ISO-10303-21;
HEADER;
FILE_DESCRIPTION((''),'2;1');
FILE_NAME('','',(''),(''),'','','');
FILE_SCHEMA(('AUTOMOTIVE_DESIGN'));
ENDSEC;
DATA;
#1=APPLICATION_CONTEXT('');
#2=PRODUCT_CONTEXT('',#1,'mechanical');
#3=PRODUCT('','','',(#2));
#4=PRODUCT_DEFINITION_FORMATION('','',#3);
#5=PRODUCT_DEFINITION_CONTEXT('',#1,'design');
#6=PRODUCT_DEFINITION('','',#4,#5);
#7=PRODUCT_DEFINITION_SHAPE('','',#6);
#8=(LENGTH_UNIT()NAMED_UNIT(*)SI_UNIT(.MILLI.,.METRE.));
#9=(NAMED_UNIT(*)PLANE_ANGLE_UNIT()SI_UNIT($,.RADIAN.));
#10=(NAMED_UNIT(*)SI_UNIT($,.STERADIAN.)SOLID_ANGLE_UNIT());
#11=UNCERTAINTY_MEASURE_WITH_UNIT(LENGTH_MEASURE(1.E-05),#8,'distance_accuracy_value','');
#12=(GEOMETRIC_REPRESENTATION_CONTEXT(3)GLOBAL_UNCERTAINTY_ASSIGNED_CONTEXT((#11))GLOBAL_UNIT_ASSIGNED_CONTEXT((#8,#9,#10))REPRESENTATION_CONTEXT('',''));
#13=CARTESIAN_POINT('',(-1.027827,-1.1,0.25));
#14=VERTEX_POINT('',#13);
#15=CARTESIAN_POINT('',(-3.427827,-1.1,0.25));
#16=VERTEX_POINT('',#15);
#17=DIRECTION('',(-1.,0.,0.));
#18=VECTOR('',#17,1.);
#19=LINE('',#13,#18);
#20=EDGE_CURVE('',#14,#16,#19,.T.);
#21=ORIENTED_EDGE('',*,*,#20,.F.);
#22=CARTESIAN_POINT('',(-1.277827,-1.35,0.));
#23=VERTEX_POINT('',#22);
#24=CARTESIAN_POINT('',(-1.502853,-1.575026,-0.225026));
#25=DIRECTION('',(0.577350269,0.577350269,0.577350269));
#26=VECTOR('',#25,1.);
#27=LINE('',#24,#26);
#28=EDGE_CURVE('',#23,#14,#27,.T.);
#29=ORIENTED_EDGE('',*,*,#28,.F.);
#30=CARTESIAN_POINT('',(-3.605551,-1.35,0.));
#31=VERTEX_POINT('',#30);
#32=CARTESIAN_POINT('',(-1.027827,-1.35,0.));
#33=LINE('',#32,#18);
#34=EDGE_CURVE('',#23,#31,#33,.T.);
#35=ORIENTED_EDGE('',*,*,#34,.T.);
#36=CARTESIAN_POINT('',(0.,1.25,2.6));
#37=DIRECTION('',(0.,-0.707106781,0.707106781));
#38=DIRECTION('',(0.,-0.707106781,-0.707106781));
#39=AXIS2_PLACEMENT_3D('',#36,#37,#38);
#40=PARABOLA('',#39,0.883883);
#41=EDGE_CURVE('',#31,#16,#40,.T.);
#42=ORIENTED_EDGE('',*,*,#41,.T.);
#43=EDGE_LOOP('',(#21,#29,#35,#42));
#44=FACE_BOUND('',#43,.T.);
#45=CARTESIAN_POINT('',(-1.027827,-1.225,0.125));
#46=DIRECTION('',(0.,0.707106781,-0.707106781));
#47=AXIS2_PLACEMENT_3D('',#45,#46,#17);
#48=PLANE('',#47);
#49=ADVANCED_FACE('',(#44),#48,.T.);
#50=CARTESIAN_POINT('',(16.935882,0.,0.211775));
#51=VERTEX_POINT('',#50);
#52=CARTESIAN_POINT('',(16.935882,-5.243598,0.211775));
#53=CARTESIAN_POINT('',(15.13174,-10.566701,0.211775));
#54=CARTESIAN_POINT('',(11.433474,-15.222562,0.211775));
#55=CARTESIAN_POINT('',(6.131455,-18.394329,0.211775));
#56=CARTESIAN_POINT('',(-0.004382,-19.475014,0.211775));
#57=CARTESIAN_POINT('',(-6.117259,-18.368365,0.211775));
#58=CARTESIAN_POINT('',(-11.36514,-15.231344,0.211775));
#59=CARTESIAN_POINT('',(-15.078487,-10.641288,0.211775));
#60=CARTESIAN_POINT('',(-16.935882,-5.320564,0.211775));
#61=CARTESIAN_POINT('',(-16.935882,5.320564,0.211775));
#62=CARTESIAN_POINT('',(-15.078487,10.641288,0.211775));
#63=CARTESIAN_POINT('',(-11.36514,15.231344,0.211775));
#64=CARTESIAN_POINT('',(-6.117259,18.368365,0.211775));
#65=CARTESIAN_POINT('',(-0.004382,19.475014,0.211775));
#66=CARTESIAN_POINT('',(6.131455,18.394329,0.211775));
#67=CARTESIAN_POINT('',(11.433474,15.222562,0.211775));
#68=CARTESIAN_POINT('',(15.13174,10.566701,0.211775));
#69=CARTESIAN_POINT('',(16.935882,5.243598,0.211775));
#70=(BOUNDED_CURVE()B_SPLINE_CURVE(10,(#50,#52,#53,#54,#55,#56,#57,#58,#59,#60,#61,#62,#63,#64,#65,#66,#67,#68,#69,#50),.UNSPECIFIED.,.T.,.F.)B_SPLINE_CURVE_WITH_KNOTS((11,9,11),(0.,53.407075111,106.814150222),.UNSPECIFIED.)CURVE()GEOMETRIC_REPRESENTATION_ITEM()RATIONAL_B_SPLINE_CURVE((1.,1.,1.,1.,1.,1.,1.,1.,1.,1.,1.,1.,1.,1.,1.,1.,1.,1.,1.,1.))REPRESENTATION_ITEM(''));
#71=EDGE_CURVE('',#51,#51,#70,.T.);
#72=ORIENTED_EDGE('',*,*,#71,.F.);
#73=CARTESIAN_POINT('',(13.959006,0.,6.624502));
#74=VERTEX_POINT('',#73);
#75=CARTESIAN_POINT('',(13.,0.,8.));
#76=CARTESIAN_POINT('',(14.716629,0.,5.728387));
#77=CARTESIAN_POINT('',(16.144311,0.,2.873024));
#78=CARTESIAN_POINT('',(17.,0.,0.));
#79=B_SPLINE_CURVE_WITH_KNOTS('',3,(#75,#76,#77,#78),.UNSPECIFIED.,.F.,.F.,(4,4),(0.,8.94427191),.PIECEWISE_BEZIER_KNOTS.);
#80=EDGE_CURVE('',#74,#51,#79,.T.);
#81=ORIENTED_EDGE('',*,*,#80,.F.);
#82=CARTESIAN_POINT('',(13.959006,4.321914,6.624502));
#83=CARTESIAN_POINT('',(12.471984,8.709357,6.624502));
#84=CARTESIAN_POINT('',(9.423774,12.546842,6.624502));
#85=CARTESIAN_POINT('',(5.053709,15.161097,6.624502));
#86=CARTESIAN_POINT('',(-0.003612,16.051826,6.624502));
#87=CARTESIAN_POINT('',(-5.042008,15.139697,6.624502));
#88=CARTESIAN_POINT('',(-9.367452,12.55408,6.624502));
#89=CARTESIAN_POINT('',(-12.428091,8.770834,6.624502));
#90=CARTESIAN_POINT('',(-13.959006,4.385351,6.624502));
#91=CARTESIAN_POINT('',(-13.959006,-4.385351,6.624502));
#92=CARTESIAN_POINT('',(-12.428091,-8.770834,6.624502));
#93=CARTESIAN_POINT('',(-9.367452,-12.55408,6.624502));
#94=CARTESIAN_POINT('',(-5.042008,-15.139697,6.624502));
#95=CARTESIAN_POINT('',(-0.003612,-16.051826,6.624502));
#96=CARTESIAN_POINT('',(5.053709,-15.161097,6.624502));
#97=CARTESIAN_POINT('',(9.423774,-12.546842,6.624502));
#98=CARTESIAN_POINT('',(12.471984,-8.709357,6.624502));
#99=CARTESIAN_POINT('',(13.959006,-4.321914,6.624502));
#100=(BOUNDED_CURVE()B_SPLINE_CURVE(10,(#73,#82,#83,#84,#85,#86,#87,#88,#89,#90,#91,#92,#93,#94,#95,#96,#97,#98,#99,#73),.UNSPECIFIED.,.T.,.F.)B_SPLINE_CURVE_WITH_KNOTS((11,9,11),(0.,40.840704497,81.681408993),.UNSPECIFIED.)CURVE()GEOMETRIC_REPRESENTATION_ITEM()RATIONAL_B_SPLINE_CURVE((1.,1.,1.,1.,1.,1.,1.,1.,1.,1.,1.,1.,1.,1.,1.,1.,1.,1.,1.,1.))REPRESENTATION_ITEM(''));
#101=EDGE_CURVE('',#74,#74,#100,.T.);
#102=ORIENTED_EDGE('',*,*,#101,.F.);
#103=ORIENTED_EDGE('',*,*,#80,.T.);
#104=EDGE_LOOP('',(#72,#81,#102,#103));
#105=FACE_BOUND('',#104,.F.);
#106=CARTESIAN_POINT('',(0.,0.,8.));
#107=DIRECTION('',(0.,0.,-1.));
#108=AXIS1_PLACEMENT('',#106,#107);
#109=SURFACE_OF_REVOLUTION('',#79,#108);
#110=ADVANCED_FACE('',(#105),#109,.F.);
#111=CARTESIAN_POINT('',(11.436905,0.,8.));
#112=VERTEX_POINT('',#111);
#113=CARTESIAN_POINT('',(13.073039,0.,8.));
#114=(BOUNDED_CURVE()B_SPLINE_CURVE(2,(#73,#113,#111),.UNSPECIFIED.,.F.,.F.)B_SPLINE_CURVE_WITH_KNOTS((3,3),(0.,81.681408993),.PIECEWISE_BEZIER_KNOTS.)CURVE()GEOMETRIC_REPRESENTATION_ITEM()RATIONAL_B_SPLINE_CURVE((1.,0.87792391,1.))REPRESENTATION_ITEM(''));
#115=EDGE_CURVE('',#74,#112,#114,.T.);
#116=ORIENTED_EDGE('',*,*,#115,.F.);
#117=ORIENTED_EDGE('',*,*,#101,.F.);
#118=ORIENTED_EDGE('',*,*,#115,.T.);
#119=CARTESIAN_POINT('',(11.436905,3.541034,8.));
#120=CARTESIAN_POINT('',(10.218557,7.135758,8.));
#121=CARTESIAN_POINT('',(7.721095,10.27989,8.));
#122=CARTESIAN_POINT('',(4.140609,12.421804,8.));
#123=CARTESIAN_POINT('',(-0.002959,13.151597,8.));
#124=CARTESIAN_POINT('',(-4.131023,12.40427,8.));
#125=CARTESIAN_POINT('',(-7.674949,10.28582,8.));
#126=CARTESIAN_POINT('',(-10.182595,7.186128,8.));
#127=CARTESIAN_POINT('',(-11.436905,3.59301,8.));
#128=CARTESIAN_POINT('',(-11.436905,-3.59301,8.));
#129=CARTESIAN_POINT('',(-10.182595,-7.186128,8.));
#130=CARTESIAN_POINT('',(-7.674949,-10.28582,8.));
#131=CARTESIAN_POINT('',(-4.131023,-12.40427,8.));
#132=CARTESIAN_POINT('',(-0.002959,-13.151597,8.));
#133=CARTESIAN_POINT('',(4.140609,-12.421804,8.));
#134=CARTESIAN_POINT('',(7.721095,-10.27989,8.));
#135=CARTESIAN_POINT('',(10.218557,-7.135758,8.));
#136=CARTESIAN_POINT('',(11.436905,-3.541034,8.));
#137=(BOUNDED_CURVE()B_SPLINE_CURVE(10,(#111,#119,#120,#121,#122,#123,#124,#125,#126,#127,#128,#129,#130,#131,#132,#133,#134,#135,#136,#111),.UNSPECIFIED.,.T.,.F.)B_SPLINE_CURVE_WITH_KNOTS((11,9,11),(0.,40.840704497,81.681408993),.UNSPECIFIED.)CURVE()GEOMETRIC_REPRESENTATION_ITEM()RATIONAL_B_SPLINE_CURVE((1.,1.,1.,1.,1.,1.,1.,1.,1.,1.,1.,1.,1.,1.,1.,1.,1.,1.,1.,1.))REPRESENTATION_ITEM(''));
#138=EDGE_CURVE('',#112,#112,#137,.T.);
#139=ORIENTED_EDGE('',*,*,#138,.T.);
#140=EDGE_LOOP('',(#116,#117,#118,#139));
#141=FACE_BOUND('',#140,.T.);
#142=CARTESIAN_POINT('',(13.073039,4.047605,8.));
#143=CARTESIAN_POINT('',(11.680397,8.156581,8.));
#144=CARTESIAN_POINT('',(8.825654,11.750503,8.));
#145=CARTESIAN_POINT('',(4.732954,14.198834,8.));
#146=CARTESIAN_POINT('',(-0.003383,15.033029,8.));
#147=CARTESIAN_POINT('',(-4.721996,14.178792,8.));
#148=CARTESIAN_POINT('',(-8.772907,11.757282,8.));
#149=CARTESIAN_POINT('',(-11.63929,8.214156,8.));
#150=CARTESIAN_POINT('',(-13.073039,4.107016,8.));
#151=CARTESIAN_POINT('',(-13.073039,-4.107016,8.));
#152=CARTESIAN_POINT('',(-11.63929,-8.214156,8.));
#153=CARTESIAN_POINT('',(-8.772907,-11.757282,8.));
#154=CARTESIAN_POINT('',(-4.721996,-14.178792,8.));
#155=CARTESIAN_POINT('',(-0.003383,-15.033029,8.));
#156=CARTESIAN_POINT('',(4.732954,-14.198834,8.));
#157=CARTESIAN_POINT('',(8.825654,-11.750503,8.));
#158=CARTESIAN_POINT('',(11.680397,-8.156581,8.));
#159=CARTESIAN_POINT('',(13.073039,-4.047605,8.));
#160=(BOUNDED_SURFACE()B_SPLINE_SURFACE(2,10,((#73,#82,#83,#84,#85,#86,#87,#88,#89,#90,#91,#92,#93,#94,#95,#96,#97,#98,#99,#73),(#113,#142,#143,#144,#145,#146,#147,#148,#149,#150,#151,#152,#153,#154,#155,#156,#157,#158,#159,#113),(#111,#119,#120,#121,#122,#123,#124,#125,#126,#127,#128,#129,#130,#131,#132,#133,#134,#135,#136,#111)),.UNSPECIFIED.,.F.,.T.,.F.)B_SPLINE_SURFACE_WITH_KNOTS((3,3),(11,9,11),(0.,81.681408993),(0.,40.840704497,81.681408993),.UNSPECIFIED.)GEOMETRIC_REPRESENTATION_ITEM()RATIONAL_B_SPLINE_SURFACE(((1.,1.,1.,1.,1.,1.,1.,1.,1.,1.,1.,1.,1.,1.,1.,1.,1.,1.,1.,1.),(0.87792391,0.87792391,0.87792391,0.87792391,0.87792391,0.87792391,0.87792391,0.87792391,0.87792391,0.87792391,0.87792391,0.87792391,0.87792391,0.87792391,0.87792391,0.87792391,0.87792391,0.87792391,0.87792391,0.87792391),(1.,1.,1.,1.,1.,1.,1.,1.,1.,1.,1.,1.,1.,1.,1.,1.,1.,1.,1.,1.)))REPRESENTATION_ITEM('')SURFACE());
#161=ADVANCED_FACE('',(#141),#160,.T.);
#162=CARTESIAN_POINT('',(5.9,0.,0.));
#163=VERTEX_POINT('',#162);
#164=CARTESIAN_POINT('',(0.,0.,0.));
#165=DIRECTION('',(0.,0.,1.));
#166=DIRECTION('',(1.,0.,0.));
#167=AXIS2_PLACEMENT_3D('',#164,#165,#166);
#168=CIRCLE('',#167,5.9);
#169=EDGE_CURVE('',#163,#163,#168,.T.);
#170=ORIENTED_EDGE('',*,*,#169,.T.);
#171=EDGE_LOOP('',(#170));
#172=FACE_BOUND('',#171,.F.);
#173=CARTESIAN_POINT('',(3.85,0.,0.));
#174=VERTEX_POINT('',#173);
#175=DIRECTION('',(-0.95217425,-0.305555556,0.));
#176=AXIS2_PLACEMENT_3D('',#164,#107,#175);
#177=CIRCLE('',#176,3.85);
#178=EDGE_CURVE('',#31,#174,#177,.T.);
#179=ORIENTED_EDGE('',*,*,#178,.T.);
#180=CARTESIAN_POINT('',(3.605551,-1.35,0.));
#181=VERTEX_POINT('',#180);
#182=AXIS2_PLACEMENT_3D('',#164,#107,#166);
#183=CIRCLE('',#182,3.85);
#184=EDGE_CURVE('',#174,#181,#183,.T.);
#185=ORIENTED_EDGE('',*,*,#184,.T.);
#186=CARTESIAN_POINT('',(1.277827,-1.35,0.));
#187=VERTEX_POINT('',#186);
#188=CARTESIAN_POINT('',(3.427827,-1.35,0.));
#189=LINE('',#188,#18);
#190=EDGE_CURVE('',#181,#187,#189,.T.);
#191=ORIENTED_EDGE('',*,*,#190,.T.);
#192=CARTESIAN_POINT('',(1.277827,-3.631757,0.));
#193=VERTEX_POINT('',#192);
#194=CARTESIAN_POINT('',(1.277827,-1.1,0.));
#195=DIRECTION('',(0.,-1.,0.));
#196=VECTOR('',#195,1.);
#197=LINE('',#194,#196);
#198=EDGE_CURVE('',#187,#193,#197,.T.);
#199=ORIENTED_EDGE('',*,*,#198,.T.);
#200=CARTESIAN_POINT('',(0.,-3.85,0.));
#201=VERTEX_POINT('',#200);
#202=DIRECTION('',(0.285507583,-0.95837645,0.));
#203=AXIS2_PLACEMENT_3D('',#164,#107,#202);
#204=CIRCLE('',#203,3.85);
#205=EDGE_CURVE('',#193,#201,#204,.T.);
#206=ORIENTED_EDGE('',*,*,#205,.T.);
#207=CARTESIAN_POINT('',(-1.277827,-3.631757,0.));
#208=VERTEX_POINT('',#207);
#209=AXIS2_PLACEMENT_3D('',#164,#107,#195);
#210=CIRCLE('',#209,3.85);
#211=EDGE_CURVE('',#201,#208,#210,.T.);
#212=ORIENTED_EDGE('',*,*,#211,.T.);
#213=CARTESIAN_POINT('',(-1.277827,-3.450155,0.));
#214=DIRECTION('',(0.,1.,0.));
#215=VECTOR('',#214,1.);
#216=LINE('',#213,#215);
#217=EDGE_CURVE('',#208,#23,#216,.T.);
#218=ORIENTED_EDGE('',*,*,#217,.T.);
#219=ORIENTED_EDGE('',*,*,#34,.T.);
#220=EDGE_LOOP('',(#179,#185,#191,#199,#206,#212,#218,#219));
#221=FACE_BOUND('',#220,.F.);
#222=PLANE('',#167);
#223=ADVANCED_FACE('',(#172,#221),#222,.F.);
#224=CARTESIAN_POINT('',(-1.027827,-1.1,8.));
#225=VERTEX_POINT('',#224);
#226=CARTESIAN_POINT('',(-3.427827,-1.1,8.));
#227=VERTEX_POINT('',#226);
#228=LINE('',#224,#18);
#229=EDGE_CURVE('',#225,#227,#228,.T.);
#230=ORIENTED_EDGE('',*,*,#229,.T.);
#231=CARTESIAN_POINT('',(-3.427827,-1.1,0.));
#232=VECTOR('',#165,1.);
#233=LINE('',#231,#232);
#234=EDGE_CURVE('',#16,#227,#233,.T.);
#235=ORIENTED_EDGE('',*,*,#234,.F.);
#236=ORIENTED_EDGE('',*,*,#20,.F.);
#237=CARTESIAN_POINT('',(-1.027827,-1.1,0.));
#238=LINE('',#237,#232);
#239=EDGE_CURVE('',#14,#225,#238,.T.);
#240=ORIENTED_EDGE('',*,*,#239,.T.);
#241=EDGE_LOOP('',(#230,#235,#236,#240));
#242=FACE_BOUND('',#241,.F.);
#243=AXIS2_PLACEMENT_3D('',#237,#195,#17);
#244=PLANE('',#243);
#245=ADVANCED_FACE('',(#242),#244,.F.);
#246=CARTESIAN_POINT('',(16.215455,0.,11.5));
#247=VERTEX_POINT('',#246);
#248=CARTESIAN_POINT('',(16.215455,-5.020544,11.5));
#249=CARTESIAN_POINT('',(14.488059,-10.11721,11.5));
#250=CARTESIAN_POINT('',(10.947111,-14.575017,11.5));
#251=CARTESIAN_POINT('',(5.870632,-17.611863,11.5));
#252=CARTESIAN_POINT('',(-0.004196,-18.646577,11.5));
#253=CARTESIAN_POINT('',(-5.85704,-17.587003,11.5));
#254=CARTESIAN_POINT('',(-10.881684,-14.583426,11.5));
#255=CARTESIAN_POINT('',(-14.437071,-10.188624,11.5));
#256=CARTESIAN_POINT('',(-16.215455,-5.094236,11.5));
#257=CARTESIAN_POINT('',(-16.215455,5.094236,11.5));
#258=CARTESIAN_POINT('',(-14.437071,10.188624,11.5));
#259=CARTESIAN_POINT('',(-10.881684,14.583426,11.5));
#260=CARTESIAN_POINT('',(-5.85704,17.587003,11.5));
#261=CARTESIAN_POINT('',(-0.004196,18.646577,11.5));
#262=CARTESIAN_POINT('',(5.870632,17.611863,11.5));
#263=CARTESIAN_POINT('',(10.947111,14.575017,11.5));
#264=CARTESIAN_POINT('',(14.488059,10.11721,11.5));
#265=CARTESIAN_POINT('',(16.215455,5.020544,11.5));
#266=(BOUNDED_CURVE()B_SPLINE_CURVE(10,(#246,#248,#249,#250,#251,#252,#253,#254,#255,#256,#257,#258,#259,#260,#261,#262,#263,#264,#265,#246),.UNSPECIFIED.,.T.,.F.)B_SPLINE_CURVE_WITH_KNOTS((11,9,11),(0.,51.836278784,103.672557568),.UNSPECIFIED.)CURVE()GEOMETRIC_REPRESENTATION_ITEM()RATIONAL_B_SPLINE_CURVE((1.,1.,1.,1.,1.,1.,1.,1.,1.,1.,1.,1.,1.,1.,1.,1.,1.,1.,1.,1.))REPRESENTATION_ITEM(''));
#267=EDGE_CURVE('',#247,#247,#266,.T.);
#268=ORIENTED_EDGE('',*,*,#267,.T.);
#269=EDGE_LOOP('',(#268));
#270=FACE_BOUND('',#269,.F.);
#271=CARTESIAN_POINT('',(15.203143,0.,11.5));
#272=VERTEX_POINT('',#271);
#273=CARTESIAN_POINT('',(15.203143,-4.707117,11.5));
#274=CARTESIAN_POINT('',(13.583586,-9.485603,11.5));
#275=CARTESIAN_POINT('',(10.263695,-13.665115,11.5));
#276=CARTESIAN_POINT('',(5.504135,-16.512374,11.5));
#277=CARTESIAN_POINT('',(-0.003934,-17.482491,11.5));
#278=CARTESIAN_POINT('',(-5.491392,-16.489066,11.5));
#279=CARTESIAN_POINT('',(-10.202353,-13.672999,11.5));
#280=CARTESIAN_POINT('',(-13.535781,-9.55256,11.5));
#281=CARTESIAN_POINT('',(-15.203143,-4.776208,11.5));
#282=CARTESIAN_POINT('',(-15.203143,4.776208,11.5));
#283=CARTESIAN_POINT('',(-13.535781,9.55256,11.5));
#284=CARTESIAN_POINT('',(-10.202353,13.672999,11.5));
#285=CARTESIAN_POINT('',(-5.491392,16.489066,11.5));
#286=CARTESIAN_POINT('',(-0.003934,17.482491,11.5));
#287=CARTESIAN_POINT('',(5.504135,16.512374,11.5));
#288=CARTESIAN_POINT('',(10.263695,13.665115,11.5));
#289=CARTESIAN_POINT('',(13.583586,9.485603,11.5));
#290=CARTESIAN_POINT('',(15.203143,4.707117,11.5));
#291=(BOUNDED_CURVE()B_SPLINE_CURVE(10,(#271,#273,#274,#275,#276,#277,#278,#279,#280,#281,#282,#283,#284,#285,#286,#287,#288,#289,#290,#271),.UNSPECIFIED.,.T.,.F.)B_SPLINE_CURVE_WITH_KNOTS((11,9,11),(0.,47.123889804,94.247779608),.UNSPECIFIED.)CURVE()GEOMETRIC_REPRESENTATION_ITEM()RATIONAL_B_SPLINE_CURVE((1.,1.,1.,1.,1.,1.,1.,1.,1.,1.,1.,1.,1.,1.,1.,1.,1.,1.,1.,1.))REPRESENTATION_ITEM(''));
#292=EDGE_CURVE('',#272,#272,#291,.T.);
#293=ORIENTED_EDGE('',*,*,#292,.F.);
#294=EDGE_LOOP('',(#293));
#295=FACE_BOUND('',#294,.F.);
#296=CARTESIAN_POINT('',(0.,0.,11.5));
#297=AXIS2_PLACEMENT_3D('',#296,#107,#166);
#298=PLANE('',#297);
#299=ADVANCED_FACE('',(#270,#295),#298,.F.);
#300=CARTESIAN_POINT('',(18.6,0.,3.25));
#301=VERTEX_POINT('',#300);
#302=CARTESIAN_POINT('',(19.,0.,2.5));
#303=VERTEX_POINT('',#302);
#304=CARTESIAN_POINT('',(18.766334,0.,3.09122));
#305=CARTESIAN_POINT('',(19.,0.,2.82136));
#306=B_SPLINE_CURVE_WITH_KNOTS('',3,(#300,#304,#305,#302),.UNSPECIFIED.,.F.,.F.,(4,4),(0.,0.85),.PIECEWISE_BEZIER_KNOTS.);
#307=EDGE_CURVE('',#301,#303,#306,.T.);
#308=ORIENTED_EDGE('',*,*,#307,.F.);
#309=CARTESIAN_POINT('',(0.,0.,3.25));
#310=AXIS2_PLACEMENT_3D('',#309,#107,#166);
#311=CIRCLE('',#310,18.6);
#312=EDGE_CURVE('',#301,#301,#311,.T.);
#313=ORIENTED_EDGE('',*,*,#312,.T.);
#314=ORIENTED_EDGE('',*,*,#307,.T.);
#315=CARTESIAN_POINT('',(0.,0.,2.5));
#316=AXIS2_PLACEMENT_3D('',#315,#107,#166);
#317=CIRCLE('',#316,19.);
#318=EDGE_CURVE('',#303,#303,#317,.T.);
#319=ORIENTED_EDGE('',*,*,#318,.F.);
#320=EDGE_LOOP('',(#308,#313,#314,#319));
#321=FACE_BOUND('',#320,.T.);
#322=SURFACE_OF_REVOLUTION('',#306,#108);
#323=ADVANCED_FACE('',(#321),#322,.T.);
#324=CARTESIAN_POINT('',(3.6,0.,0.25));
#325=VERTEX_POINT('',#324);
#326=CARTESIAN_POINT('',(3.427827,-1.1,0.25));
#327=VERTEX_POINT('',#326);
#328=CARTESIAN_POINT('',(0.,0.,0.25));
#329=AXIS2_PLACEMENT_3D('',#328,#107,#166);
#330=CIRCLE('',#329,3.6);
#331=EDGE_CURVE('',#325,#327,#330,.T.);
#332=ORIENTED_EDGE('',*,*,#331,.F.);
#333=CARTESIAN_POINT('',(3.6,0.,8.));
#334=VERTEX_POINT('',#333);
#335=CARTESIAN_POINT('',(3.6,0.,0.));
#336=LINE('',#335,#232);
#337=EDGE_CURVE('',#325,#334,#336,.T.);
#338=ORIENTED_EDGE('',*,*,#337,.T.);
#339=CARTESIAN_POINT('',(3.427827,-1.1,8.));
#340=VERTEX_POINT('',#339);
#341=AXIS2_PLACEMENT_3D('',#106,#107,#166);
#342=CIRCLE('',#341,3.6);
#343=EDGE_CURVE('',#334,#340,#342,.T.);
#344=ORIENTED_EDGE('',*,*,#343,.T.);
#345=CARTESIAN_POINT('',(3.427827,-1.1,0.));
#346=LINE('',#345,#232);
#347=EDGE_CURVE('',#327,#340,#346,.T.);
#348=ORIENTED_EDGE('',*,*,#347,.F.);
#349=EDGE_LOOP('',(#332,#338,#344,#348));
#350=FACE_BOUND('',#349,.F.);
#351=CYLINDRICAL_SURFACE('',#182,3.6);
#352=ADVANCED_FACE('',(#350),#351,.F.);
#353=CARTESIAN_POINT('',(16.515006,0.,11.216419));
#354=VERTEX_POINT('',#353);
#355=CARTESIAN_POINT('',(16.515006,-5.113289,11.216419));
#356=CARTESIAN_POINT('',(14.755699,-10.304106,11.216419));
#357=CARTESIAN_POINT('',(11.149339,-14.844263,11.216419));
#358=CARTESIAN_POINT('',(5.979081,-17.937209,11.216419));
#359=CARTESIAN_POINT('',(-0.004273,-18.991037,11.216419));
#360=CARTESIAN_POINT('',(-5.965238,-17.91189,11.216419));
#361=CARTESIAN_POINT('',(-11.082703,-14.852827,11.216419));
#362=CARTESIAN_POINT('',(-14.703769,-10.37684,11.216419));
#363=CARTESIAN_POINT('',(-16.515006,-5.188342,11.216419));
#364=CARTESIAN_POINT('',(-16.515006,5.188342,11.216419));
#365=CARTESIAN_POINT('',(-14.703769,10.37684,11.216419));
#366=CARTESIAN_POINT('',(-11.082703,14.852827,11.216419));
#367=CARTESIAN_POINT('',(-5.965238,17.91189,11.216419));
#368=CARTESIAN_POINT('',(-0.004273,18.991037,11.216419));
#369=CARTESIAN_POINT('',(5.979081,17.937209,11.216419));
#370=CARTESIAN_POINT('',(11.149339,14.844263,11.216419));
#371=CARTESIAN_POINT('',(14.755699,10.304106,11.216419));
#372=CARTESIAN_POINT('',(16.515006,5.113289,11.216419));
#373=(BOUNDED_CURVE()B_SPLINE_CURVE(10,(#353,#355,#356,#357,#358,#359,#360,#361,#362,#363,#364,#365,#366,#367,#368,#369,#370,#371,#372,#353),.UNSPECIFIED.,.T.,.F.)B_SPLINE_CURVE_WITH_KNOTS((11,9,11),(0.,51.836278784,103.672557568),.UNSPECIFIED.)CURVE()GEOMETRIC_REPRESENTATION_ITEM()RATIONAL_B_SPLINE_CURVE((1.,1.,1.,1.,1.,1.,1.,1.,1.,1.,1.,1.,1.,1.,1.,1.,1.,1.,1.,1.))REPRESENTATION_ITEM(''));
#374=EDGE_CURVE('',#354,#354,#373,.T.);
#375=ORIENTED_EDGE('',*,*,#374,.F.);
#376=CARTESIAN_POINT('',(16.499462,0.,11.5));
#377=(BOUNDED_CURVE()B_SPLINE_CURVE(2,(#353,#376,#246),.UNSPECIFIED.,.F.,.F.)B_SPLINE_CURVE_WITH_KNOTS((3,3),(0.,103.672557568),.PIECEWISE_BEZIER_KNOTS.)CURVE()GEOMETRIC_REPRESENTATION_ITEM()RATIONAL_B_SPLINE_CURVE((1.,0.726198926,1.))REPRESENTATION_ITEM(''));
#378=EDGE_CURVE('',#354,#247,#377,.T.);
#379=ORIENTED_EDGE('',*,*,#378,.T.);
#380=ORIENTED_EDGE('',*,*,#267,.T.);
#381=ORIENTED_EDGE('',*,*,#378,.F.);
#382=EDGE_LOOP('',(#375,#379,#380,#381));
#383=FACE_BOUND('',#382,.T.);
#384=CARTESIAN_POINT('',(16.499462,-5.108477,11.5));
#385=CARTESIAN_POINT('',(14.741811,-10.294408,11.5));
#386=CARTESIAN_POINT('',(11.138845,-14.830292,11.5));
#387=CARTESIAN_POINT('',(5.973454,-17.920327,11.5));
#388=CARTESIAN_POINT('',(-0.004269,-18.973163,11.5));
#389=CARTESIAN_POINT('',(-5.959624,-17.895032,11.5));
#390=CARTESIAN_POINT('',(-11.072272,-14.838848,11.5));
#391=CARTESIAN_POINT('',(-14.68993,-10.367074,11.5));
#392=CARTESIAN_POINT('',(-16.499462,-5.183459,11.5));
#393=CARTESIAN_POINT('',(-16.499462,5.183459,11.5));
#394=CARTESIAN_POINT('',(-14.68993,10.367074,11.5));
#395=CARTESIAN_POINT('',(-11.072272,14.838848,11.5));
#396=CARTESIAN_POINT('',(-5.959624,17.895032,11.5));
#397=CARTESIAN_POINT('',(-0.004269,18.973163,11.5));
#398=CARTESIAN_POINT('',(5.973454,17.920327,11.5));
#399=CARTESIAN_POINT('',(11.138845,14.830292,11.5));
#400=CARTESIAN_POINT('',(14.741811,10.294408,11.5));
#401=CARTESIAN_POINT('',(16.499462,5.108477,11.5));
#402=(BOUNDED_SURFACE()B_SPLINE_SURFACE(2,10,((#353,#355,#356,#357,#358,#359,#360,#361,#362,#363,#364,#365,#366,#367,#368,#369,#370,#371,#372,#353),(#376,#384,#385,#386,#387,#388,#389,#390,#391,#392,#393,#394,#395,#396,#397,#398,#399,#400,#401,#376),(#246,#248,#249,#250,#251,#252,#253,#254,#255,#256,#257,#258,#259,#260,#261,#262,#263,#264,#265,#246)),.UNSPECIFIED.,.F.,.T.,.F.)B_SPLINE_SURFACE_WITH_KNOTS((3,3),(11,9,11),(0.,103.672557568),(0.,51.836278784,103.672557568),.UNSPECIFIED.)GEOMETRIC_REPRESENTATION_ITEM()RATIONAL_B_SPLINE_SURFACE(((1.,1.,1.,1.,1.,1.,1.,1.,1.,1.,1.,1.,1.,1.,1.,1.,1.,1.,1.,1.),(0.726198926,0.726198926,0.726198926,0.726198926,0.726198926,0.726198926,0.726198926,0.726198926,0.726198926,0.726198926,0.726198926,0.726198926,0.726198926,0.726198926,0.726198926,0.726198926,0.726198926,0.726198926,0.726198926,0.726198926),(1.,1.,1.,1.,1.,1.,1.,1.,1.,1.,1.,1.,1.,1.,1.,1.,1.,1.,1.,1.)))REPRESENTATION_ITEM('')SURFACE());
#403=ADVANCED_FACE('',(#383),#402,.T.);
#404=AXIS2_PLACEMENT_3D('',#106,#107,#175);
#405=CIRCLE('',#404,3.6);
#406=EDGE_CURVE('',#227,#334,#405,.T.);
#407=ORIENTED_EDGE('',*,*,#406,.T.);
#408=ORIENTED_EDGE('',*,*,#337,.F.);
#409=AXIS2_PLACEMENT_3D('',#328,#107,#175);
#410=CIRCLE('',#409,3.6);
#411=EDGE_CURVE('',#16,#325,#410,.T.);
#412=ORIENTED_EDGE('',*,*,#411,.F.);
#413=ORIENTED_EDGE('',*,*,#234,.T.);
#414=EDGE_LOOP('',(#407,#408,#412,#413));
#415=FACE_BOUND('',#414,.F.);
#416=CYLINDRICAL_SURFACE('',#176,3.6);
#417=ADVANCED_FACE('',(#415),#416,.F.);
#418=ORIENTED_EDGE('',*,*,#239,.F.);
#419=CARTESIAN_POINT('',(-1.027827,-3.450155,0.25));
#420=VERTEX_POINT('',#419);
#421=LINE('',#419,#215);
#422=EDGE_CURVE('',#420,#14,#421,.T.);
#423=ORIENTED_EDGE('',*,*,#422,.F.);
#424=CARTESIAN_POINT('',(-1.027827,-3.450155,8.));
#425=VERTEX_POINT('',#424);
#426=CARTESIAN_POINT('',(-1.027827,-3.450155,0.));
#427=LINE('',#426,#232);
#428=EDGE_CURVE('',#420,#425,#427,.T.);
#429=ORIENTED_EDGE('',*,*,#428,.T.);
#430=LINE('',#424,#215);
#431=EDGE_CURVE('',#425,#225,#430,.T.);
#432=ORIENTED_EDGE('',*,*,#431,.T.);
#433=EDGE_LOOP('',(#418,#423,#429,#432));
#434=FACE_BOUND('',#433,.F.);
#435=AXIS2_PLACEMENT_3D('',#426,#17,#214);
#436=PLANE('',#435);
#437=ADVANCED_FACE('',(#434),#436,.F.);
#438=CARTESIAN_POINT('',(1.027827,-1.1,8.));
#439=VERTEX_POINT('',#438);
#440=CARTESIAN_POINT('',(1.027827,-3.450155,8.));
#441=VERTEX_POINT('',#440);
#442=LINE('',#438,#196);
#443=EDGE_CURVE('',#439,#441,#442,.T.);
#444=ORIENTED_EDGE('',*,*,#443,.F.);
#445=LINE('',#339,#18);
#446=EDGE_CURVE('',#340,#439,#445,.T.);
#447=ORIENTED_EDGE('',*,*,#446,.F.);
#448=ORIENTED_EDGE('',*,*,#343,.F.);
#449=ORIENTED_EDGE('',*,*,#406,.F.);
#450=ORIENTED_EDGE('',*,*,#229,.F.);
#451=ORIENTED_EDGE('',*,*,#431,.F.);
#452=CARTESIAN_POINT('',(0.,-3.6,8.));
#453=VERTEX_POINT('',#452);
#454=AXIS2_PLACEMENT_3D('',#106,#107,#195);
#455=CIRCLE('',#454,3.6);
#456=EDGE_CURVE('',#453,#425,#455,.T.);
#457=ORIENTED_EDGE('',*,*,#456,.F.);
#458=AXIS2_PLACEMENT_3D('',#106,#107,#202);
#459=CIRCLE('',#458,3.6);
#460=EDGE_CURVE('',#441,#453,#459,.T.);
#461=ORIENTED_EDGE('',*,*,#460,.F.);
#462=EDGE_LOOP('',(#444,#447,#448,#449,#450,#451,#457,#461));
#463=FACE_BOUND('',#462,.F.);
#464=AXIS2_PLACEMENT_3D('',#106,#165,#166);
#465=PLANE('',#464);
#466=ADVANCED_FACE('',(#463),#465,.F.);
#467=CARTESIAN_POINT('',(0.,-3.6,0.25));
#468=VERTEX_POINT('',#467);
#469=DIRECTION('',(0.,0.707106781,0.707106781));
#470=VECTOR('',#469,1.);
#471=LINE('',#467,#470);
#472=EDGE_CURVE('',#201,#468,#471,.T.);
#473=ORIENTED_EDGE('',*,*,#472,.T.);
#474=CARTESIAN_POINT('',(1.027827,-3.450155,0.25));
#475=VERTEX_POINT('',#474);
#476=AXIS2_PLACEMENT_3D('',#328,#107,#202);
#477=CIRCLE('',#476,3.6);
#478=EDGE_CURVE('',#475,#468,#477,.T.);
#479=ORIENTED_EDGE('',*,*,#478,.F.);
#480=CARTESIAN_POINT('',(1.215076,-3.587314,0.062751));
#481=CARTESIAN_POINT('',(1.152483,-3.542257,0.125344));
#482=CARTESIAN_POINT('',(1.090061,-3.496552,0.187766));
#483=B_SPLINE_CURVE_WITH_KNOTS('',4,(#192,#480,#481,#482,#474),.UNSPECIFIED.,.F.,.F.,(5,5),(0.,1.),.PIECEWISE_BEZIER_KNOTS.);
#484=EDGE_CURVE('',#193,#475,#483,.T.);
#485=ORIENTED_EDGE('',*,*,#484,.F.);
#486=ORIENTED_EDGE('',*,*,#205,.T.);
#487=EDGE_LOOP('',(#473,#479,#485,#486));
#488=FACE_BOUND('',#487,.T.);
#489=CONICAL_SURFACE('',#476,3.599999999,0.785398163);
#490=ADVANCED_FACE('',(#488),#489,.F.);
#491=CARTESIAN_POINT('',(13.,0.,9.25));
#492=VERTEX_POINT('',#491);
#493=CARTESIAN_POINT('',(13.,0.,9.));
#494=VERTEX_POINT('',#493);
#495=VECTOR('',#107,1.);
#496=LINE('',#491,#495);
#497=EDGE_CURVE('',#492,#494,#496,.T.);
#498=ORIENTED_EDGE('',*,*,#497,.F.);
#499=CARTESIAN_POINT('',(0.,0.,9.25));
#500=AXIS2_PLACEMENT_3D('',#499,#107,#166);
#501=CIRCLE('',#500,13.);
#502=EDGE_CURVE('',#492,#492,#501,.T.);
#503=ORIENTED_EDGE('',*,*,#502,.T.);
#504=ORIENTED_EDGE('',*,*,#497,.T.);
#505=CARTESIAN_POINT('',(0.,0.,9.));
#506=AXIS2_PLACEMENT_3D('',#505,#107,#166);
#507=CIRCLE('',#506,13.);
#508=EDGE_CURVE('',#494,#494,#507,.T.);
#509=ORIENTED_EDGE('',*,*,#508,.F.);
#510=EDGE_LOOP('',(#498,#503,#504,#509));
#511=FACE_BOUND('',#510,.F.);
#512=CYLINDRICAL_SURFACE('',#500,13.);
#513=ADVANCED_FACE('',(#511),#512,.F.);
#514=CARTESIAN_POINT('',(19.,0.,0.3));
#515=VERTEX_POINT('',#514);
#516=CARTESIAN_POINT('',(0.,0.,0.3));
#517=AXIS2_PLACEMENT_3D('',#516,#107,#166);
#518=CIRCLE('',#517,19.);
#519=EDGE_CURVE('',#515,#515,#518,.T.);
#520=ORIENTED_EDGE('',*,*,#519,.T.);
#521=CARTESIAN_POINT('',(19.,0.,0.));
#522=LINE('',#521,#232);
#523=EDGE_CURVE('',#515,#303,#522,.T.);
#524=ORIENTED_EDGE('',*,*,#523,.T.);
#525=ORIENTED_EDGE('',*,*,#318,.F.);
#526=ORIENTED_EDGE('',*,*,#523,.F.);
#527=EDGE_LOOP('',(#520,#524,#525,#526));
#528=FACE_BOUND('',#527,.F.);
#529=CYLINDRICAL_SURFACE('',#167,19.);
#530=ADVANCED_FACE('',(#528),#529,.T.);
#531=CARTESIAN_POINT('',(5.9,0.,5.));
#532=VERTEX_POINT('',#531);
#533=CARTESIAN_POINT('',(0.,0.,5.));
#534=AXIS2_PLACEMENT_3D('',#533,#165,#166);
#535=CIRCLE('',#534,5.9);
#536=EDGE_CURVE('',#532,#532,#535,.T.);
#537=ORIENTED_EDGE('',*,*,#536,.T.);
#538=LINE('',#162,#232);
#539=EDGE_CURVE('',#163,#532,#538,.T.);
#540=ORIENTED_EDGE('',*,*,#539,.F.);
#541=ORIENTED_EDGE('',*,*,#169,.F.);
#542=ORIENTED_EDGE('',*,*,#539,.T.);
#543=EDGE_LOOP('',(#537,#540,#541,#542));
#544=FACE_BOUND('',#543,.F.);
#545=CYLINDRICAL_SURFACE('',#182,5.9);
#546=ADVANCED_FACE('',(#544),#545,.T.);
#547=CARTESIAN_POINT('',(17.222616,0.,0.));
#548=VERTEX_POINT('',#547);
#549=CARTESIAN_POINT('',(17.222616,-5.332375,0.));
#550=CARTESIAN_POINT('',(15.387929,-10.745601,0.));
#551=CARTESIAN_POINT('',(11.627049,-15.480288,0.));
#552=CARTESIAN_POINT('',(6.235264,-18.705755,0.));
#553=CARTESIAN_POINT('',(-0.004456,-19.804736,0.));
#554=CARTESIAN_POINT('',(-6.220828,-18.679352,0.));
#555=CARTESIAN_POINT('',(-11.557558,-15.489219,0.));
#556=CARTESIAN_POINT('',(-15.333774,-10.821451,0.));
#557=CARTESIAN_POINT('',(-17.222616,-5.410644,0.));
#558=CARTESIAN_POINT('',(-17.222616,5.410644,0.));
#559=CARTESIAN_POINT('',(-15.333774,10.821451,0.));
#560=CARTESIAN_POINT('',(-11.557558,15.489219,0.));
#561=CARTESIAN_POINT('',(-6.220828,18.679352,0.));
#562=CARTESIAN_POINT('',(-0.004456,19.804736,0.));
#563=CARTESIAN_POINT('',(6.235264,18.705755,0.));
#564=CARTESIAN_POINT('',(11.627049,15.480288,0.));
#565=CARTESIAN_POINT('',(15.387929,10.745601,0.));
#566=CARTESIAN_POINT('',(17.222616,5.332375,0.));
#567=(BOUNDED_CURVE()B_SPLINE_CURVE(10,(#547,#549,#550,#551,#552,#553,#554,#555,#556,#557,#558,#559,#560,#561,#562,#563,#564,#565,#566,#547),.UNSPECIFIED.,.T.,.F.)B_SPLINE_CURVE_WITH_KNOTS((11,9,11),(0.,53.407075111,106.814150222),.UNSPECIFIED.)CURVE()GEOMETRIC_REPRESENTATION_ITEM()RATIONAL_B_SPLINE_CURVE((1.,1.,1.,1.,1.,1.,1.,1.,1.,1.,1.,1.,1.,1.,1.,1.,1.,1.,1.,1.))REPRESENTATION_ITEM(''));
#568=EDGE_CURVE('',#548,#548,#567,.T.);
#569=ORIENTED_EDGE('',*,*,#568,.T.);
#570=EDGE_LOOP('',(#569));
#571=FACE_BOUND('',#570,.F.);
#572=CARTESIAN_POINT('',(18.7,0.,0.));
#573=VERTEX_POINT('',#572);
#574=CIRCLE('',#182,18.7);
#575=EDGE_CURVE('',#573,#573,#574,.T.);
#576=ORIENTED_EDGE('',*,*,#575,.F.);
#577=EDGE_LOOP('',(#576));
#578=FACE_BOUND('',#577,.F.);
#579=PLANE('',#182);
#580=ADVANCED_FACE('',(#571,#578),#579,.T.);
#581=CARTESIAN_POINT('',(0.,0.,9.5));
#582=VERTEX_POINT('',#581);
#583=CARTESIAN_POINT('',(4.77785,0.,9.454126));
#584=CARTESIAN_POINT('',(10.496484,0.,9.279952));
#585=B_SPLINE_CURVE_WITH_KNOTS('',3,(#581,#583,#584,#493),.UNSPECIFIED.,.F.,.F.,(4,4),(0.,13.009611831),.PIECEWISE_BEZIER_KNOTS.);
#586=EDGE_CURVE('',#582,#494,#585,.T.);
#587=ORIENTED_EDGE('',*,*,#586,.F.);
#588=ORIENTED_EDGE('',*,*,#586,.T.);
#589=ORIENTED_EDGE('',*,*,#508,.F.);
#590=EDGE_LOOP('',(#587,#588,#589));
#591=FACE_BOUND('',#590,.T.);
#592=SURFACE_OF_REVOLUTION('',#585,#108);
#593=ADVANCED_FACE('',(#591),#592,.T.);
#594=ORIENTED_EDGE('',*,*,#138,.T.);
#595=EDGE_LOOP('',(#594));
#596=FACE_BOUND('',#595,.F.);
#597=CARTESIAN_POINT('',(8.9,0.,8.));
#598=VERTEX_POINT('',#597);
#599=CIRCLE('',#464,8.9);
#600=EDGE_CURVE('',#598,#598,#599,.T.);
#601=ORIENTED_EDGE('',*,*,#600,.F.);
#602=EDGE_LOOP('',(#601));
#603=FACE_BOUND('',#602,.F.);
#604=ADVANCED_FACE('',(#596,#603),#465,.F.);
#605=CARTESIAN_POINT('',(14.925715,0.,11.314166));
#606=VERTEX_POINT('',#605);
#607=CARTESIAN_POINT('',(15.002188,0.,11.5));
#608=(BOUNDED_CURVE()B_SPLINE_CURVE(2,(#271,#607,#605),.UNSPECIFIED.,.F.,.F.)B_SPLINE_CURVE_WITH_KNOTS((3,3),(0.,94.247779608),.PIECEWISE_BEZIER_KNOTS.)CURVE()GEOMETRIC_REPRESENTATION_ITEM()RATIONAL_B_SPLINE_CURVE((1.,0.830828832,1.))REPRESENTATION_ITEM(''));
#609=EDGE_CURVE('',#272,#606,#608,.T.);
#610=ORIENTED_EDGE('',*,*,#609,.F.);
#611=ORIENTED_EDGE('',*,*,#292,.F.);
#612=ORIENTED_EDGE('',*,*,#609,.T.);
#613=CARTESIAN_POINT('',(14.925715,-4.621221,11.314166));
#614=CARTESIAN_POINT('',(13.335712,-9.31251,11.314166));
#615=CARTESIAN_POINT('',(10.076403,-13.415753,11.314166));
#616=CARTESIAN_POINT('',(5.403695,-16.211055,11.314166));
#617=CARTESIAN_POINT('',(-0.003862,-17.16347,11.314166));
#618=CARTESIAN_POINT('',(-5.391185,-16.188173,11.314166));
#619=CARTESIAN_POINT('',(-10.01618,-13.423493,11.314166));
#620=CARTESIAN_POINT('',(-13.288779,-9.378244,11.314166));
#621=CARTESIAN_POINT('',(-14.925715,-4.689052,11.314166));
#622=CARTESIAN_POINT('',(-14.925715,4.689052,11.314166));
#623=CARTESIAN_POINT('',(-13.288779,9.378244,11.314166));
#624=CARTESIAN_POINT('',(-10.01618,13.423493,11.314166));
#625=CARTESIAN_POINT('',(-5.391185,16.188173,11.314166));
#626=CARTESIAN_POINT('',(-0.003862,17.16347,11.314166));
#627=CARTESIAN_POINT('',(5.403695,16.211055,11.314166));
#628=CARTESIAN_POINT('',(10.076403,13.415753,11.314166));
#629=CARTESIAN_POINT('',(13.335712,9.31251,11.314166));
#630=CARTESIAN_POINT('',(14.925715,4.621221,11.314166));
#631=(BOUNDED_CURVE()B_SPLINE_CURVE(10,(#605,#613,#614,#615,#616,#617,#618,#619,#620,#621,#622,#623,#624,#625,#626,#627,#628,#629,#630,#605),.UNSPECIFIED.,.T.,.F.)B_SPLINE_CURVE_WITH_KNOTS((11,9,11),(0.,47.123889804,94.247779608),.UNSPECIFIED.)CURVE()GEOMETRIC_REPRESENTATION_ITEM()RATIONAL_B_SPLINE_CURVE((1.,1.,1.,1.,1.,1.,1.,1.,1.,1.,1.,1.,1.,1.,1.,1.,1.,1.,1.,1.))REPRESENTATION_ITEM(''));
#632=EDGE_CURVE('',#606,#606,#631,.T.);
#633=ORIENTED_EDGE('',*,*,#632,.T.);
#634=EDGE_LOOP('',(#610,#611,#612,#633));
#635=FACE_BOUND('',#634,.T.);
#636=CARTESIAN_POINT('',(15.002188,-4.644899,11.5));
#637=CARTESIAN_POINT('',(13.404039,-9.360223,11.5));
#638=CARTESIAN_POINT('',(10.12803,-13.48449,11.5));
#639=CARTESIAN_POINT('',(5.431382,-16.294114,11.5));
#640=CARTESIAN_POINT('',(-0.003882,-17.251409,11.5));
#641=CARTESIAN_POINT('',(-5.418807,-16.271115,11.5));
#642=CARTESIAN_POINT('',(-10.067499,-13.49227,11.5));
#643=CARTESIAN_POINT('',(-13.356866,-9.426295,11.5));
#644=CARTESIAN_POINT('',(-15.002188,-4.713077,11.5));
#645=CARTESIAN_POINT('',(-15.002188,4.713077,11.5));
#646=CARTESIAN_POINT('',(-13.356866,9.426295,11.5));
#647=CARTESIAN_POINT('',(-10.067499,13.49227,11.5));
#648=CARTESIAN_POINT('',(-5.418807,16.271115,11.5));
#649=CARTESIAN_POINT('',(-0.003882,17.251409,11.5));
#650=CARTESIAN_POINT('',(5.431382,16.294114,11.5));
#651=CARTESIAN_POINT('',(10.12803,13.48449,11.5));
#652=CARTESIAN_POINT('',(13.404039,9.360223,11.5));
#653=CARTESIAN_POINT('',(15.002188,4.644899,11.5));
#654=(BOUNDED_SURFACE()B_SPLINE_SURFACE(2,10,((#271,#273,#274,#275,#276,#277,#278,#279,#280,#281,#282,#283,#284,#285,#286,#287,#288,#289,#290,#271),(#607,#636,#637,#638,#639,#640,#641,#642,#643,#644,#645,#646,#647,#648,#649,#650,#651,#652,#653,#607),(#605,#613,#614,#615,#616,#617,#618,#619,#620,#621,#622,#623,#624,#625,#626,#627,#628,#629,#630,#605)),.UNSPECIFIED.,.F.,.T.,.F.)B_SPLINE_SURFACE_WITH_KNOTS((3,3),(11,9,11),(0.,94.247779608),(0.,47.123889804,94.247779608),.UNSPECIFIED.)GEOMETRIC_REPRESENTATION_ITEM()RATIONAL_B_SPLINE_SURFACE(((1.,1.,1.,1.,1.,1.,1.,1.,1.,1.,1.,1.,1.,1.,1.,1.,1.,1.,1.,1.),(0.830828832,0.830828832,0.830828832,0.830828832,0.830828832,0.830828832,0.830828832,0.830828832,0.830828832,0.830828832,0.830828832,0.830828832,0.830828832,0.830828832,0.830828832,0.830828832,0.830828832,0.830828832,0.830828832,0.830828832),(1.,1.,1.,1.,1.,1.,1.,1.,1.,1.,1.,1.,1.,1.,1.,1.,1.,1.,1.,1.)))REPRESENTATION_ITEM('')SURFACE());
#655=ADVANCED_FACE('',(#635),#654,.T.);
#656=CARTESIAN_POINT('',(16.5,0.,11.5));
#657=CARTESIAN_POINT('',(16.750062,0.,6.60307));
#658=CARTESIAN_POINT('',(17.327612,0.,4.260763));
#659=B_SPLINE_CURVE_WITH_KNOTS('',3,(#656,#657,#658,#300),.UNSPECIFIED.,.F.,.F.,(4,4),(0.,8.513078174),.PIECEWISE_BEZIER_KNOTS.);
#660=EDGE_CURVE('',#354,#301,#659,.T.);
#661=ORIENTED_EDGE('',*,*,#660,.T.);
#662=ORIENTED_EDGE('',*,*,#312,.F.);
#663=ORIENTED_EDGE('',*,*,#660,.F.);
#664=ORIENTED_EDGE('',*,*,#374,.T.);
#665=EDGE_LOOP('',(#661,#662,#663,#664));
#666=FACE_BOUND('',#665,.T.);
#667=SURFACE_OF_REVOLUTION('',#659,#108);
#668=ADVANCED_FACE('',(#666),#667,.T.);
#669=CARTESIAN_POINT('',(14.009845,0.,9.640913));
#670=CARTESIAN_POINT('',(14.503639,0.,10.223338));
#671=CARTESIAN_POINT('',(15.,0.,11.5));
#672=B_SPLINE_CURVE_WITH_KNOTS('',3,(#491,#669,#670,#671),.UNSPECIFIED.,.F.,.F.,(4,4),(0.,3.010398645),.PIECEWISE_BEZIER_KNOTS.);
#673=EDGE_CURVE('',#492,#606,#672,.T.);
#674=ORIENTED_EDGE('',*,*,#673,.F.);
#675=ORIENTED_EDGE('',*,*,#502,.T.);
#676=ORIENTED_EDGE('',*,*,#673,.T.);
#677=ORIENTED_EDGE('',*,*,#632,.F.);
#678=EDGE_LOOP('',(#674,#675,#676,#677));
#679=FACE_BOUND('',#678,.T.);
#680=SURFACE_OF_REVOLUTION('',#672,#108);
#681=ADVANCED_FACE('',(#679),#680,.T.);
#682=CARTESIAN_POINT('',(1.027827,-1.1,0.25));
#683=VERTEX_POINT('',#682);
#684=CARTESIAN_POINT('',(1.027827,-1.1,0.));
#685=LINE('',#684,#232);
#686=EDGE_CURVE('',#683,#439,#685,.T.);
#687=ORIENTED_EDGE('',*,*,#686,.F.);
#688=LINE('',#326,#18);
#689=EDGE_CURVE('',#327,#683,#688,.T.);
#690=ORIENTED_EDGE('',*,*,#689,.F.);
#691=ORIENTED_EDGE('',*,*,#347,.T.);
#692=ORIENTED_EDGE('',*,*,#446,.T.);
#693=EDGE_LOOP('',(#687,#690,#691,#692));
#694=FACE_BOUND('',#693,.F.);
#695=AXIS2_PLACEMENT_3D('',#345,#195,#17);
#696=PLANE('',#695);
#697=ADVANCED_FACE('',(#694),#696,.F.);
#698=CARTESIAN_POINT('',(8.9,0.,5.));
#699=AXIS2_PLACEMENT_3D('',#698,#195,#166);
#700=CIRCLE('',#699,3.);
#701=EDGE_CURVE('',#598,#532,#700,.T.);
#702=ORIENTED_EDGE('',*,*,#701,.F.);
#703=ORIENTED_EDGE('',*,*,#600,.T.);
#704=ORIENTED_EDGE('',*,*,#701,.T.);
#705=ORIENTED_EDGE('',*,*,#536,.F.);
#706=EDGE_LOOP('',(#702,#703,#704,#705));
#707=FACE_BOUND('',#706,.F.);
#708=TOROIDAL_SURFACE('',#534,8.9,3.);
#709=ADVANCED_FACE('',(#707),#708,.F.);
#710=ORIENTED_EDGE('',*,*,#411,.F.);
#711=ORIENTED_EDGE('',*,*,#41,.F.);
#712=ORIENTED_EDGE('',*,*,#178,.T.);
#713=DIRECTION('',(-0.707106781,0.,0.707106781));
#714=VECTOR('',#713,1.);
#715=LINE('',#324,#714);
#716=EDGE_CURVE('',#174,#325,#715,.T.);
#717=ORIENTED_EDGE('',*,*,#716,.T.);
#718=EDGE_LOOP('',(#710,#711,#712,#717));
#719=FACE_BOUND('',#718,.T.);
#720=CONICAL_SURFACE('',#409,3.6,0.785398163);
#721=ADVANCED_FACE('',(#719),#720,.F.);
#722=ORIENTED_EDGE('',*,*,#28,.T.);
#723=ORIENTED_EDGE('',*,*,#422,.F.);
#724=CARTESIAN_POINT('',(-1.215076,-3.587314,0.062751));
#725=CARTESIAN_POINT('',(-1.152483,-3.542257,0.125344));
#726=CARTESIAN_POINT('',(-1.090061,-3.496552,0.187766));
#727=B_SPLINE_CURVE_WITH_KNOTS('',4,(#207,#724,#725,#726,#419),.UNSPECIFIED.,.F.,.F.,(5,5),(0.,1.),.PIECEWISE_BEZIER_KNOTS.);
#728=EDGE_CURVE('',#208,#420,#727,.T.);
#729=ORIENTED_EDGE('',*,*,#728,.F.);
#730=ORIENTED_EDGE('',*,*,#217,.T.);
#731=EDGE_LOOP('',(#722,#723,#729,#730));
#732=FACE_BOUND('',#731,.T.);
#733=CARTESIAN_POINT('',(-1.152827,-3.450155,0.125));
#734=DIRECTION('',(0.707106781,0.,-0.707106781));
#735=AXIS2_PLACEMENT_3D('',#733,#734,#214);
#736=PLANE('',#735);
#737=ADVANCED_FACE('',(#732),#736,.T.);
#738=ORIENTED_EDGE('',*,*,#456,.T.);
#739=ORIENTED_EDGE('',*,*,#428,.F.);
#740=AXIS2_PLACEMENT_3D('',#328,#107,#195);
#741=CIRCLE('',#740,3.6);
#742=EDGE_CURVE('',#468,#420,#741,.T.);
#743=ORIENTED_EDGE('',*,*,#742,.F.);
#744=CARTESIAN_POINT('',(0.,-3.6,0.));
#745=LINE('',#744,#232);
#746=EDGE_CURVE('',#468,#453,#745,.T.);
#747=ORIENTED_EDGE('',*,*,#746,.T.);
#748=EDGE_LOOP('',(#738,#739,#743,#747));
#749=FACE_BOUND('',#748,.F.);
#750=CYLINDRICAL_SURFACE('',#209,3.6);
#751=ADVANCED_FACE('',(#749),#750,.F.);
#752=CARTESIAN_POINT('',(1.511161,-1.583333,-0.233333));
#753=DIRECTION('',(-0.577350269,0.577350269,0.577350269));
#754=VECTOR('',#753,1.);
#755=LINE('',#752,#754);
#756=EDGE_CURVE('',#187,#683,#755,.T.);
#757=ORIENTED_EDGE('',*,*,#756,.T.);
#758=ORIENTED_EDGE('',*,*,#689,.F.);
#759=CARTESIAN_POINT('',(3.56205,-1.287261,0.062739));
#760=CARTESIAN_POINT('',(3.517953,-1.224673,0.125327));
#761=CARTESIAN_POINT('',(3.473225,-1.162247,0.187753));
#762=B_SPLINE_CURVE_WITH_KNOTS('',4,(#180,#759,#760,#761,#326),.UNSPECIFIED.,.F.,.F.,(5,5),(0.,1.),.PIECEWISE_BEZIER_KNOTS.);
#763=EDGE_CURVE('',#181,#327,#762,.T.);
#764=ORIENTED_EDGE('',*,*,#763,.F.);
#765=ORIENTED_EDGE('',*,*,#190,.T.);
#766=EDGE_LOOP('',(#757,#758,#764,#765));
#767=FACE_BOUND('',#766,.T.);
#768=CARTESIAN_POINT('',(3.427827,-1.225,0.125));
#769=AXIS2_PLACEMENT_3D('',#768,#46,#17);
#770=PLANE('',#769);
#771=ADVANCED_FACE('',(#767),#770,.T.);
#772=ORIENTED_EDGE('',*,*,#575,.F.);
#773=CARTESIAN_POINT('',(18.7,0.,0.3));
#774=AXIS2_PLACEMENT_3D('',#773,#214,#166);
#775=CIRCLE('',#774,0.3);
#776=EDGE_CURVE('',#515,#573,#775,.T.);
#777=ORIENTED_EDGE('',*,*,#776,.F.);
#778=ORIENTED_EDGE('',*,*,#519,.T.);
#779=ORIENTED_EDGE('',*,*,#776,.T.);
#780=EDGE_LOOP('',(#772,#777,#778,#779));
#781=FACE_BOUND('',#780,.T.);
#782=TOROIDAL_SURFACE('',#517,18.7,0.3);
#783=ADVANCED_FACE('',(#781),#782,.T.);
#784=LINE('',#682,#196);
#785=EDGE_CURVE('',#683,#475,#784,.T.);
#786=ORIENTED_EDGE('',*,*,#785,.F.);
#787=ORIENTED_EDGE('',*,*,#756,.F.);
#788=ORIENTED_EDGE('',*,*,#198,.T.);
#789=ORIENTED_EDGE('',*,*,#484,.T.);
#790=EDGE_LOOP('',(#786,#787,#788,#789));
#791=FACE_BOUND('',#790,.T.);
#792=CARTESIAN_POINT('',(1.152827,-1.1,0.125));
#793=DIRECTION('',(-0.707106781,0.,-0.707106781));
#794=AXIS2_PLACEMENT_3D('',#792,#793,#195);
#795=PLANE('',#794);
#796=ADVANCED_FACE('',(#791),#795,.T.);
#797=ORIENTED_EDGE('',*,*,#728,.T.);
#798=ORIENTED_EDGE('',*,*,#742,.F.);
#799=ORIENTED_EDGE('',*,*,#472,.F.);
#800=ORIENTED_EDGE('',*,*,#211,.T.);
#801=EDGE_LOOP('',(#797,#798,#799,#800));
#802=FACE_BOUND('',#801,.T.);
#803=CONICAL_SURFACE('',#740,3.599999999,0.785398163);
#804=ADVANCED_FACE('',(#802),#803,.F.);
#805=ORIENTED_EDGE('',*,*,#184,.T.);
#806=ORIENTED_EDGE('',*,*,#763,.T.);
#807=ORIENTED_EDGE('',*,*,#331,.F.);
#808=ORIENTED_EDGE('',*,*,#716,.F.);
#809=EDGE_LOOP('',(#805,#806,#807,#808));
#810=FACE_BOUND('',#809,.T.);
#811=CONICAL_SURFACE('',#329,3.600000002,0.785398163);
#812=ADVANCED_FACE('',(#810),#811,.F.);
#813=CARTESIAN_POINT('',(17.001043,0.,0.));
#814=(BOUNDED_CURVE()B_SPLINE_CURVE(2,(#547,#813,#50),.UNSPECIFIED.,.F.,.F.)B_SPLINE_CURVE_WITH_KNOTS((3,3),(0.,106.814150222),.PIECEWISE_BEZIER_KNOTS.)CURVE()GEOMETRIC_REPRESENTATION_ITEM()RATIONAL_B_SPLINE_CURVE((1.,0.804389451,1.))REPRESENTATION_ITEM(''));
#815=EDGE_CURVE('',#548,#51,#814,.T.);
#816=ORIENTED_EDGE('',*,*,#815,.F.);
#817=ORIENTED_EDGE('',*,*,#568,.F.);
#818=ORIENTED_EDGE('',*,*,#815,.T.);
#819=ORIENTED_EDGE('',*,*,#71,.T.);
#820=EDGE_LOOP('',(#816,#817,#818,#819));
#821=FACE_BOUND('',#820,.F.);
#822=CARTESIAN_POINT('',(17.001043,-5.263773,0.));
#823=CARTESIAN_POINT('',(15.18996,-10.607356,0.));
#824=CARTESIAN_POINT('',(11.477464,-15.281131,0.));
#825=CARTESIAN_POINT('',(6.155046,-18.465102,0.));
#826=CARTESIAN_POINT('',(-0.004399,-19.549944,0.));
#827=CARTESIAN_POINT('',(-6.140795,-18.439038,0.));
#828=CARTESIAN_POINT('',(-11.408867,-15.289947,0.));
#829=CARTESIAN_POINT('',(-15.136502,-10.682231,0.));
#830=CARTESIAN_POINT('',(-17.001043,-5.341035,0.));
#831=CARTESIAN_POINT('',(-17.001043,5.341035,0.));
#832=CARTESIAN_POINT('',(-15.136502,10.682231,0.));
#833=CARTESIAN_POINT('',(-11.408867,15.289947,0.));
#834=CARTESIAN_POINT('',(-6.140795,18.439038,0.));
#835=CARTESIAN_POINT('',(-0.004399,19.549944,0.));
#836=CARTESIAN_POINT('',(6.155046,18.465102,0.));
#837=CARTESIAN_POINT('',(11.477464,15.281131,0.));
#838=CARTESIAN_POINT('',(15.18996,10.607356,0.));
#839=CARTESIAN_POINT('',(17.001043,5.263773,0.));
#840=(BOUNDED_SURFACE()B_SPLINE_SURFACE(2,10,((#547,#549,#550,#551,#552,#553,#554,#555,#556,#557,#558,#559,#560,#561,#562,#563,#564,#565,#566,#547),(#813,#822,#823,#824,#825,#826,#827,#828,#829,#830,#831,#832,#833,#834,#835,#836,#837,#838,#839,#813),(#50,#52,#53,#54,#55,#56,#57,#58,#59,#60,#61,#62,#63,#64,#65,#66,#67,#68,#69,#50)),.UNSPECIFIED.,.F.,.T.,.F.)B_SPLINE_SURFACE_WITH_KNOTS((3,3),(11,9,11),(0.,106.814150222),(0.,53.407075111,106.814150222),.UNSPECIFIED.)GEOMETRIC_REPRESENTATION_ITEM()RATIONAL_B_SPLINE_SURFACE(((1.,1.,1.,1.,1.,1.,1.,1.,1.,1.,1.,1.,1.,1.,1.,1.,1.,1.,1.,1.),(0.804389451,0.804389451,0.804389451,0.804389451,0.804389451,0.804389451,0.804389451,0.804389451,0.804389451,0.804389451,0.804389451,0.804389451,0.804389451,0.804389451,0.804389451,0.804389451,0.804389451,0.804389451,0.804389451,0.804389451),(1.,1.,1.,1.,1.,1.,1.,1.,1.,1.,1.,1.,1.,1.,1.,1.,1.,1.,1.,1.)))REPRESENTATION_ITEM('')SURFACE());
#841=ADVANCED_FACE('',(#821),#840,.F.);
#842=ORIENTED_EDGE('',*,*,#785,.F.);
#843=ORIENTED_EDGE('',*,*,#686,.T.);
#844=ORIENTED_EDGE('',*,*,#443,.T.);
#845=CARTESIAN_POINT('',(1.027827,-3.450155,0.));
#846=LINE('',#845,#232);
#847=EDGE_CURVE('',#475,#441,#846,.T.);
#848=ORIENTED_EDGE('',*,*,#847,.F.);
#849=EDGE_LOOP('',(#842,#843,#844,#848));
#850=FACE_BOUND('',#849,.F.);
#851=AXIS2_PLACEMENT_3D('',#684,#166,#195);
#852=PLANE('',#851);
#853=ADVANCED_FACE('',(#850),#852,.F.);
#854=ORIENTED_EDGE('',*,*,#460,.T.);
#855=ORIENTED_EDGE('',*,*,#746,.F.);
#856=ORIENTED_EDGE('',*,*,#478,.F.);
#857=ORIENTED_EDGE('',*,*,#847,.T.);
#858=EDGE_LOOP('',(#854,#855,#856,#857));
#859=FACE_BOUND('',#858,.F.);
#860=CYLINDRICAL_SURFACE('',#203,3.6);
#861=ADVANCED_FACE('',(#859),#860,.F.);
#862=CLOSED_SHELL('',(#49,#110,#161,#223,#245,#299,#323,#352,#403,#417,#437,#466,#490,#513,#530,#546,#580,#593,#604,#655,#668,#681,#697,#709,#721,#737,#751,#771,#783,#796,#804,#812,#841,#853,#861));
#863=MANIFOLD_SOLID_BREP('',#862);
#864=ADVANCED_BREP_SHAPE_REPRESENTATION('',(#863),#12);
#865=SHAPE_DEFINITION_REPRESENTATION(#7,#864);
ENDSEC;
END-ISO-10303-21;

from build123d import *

# Parameters (mm, degrees)
F0_R     = 5.9
F0_R_2   = 5.1
F0_R_3   = 4.9
F1_DEPTH = 8
F3_R     = 13
F3_R_2   = 5.9
F4_DEPTH = 1.5
F5_W     = 13
F5_H     = 1.2751376927
F9_R     = 0.3
F10_R    = 3
F11_SIZE = 0.25


with BuildPart() as f1:
    # F0 (on Top) → F1 (new body)
    with BuildSketch(Plane.XY):
        Circle(F0_R)
        Circle(F0_R_2, mode=Mode.SUBTRACT)
        Circle(F0_R_2)
        Circle(F0_R_3, mode=Mode.SUBTRACT)
        Circle(F0_R_3)
        with BuildLine():
            ThreePointArc((-3.4278273002, -1.1), (-0.5566963801, 3.5566963801), (3.6, 0))
            ThreePointArc((3.6, 0), (3.5566963801, -0.5566963801), (3.4278273002, -1.1))
            ThreePointArc((3.4278273002, -1.1), (2.5187341799, -2.5721543755), (1.0278273002, -3.4501552198))
            ThreePointArc((1.0278273002, -3.4501552198), (0.519346324, -3.5623418415), (0, -3.6))
            ThreePointArc((0, -3.6), (-0.519346324, -3.5623418415), (-1.0278273002, -3.4501552198))
            ThreePointArc((-1.0278273002, -3.4501552198), (-2.5187341799, -2.5721543755), (-3.4278273002, -1.1))
        make_face(mode=Mode.SUBTRACT)
        with BuildLine():
            Line((-1.0278273002, -1.1), (-3.4278273002, -1.1))
            ThreePointArc((-3.4278273002, -1.1), (-2.5187341799, -2.5721543755), (-1.0278273002, -3.4501552198))
            Line((-1.0278273002, -3.4501552198), (-1.0278273002, -1.1))
        make_face()
        with BuildLine():
            ThreePointArc((1.0278273002, -3.4501552198), (2.5187341799, -2.5721543755), (3.4278273002, -1.1))
            Line((3.4278273002, -1.1), (1.0278273002, -1.1))
            Line((1.0278273002, -1.1), (1.0278273002, -3.4501552198))
        make_face()
    extrude(amount=F1_DEPTH)

    # F3 (on offset) → F4 (join)
    with BuildSketch(Plane.XY.offset(8)):
        Circle(F3_R)
        Circle(F3_R_2, mode=Mode.SUBTRACT)
        Circle(F3_R_2)
    extrude(amount=F4_DEPTH)

    # F5 (on Front) → F6 (revolve, cut)
    with BuildSketch(Plane.XZ):
        with Locations((6.5, 10.1375688463)):
            Rectangle(F5_W, F5_H)
        with BuildLine():
            Line((13, 9.5), (0, 9.5))
            add(Edge.make_bspline(
                [(0, 9.5), (4.7778501175, 9.4541264698), (10.4964841157, 9.2799523845), (13, 9)],
                knots=[0, 0, 0, 0, 13.0096118313, 13.0096118313, 13.0096118313, 13.0096118313], degree=3))
            Line((13, 9), (13, 9.5))
        make_face()
    revolve(axis=Axis((0, 0, 8), (0, 0, -1)), mode=Mode.SUBTRACT)

    # F7 (on Front) → F8 (revolve)
    with BuildSketch(Plane.XZ):
        with BuildLine():
            Line((18.6, 2.5), (19, 2.5))
            add(Edge.make_bspline(
                [(18.6, 3.25), (18.7663344502, 3.0912196208), (19, 2.8213595506), (19, 2.5)],
                knots=[0, 0, 0, 0, 0.85, 0.85, 0.85, 0.85], degree=3))
            Line((18.6, 3.25), (18.6, 2.5))
        make_face()
        with BuildLine():
            add(Edge.make_bspline(
                [(13, 8), (14.7166289389, 5.7283868082), (16.1443110555, 2.8730242047), (17, 0)],
                knots=[0, 0, 0, 0, 8.94427191, 8.94427191, 8.94427191, 8.94427191], degree=3))
            Line((17, 0), (19, 0))
            Line((19, 0), (19, 2.5))
            Line((19, 2.5), (18.6, 2.5))
            Line((18.6, 2.5), (18.6, 3.25))
            add(Edge.make_bspline(
                [(16.5, 11.5), (16.7500618845, 6.6030700691), (17.3276124358, 4.2607626356), (18.6, 3.25)],
                knots=[0, 0, 0, 0, 8.5130781742, 8.5130781742, 8.5130781742, 8.5130781742], degree=3))
            Line((16.5, 11.5), (15, 11.5))
            add(Edge.make_bspline(
                [(13, 9.25), (14.0098445117, 9.6409134567), (14.5036391914, 10.2233383805), (15, 11.5)],
                knots=[0, 0, 0, 0, 3.0103986447, 3.0103986447, 3.0103986447, 3.0103986447], degree=3))
            Line((13, 9.25), (13, 9))
            Line((13, 9), (13, 8))
        make_face()
    revolve(axis=Axis((0, 0, 8), (0, 0, -1)))

    # F9
    f9_edges = [f1.edges().sort_by_distance(p)[0] for p in [
        (-16.5, 0, 11.5),
        (-15, 0, 11.5),
        (-19, 0, 0),
        (-17, 0, 0),
    ]]
    fillet(f9_edges, radius=F9_R)

    # F10
    f10_edges = [f1.edges().sort_by_distance(p)[0] for p in [
        (-5.9, 0, 8),
        (-13, 0, 8),
    ]]
    fillet(f10_edges, radius=F10_R)

    # F11
    f11_edges = [f1.edges().sort_by_distance(p)[0] for p in [
        (-2.227827, -1.1, 0),
        (-1.027827, -2.275078, 0),
        (1.027827, -2.275078, 0),
        (2.227827, -1.1, 0),
        (0, -3.6, 0),
        (0, 3.6, 0),
    ]]
    chamfer(f11_edges, length=F11_SIZE)


solid = f1.part
